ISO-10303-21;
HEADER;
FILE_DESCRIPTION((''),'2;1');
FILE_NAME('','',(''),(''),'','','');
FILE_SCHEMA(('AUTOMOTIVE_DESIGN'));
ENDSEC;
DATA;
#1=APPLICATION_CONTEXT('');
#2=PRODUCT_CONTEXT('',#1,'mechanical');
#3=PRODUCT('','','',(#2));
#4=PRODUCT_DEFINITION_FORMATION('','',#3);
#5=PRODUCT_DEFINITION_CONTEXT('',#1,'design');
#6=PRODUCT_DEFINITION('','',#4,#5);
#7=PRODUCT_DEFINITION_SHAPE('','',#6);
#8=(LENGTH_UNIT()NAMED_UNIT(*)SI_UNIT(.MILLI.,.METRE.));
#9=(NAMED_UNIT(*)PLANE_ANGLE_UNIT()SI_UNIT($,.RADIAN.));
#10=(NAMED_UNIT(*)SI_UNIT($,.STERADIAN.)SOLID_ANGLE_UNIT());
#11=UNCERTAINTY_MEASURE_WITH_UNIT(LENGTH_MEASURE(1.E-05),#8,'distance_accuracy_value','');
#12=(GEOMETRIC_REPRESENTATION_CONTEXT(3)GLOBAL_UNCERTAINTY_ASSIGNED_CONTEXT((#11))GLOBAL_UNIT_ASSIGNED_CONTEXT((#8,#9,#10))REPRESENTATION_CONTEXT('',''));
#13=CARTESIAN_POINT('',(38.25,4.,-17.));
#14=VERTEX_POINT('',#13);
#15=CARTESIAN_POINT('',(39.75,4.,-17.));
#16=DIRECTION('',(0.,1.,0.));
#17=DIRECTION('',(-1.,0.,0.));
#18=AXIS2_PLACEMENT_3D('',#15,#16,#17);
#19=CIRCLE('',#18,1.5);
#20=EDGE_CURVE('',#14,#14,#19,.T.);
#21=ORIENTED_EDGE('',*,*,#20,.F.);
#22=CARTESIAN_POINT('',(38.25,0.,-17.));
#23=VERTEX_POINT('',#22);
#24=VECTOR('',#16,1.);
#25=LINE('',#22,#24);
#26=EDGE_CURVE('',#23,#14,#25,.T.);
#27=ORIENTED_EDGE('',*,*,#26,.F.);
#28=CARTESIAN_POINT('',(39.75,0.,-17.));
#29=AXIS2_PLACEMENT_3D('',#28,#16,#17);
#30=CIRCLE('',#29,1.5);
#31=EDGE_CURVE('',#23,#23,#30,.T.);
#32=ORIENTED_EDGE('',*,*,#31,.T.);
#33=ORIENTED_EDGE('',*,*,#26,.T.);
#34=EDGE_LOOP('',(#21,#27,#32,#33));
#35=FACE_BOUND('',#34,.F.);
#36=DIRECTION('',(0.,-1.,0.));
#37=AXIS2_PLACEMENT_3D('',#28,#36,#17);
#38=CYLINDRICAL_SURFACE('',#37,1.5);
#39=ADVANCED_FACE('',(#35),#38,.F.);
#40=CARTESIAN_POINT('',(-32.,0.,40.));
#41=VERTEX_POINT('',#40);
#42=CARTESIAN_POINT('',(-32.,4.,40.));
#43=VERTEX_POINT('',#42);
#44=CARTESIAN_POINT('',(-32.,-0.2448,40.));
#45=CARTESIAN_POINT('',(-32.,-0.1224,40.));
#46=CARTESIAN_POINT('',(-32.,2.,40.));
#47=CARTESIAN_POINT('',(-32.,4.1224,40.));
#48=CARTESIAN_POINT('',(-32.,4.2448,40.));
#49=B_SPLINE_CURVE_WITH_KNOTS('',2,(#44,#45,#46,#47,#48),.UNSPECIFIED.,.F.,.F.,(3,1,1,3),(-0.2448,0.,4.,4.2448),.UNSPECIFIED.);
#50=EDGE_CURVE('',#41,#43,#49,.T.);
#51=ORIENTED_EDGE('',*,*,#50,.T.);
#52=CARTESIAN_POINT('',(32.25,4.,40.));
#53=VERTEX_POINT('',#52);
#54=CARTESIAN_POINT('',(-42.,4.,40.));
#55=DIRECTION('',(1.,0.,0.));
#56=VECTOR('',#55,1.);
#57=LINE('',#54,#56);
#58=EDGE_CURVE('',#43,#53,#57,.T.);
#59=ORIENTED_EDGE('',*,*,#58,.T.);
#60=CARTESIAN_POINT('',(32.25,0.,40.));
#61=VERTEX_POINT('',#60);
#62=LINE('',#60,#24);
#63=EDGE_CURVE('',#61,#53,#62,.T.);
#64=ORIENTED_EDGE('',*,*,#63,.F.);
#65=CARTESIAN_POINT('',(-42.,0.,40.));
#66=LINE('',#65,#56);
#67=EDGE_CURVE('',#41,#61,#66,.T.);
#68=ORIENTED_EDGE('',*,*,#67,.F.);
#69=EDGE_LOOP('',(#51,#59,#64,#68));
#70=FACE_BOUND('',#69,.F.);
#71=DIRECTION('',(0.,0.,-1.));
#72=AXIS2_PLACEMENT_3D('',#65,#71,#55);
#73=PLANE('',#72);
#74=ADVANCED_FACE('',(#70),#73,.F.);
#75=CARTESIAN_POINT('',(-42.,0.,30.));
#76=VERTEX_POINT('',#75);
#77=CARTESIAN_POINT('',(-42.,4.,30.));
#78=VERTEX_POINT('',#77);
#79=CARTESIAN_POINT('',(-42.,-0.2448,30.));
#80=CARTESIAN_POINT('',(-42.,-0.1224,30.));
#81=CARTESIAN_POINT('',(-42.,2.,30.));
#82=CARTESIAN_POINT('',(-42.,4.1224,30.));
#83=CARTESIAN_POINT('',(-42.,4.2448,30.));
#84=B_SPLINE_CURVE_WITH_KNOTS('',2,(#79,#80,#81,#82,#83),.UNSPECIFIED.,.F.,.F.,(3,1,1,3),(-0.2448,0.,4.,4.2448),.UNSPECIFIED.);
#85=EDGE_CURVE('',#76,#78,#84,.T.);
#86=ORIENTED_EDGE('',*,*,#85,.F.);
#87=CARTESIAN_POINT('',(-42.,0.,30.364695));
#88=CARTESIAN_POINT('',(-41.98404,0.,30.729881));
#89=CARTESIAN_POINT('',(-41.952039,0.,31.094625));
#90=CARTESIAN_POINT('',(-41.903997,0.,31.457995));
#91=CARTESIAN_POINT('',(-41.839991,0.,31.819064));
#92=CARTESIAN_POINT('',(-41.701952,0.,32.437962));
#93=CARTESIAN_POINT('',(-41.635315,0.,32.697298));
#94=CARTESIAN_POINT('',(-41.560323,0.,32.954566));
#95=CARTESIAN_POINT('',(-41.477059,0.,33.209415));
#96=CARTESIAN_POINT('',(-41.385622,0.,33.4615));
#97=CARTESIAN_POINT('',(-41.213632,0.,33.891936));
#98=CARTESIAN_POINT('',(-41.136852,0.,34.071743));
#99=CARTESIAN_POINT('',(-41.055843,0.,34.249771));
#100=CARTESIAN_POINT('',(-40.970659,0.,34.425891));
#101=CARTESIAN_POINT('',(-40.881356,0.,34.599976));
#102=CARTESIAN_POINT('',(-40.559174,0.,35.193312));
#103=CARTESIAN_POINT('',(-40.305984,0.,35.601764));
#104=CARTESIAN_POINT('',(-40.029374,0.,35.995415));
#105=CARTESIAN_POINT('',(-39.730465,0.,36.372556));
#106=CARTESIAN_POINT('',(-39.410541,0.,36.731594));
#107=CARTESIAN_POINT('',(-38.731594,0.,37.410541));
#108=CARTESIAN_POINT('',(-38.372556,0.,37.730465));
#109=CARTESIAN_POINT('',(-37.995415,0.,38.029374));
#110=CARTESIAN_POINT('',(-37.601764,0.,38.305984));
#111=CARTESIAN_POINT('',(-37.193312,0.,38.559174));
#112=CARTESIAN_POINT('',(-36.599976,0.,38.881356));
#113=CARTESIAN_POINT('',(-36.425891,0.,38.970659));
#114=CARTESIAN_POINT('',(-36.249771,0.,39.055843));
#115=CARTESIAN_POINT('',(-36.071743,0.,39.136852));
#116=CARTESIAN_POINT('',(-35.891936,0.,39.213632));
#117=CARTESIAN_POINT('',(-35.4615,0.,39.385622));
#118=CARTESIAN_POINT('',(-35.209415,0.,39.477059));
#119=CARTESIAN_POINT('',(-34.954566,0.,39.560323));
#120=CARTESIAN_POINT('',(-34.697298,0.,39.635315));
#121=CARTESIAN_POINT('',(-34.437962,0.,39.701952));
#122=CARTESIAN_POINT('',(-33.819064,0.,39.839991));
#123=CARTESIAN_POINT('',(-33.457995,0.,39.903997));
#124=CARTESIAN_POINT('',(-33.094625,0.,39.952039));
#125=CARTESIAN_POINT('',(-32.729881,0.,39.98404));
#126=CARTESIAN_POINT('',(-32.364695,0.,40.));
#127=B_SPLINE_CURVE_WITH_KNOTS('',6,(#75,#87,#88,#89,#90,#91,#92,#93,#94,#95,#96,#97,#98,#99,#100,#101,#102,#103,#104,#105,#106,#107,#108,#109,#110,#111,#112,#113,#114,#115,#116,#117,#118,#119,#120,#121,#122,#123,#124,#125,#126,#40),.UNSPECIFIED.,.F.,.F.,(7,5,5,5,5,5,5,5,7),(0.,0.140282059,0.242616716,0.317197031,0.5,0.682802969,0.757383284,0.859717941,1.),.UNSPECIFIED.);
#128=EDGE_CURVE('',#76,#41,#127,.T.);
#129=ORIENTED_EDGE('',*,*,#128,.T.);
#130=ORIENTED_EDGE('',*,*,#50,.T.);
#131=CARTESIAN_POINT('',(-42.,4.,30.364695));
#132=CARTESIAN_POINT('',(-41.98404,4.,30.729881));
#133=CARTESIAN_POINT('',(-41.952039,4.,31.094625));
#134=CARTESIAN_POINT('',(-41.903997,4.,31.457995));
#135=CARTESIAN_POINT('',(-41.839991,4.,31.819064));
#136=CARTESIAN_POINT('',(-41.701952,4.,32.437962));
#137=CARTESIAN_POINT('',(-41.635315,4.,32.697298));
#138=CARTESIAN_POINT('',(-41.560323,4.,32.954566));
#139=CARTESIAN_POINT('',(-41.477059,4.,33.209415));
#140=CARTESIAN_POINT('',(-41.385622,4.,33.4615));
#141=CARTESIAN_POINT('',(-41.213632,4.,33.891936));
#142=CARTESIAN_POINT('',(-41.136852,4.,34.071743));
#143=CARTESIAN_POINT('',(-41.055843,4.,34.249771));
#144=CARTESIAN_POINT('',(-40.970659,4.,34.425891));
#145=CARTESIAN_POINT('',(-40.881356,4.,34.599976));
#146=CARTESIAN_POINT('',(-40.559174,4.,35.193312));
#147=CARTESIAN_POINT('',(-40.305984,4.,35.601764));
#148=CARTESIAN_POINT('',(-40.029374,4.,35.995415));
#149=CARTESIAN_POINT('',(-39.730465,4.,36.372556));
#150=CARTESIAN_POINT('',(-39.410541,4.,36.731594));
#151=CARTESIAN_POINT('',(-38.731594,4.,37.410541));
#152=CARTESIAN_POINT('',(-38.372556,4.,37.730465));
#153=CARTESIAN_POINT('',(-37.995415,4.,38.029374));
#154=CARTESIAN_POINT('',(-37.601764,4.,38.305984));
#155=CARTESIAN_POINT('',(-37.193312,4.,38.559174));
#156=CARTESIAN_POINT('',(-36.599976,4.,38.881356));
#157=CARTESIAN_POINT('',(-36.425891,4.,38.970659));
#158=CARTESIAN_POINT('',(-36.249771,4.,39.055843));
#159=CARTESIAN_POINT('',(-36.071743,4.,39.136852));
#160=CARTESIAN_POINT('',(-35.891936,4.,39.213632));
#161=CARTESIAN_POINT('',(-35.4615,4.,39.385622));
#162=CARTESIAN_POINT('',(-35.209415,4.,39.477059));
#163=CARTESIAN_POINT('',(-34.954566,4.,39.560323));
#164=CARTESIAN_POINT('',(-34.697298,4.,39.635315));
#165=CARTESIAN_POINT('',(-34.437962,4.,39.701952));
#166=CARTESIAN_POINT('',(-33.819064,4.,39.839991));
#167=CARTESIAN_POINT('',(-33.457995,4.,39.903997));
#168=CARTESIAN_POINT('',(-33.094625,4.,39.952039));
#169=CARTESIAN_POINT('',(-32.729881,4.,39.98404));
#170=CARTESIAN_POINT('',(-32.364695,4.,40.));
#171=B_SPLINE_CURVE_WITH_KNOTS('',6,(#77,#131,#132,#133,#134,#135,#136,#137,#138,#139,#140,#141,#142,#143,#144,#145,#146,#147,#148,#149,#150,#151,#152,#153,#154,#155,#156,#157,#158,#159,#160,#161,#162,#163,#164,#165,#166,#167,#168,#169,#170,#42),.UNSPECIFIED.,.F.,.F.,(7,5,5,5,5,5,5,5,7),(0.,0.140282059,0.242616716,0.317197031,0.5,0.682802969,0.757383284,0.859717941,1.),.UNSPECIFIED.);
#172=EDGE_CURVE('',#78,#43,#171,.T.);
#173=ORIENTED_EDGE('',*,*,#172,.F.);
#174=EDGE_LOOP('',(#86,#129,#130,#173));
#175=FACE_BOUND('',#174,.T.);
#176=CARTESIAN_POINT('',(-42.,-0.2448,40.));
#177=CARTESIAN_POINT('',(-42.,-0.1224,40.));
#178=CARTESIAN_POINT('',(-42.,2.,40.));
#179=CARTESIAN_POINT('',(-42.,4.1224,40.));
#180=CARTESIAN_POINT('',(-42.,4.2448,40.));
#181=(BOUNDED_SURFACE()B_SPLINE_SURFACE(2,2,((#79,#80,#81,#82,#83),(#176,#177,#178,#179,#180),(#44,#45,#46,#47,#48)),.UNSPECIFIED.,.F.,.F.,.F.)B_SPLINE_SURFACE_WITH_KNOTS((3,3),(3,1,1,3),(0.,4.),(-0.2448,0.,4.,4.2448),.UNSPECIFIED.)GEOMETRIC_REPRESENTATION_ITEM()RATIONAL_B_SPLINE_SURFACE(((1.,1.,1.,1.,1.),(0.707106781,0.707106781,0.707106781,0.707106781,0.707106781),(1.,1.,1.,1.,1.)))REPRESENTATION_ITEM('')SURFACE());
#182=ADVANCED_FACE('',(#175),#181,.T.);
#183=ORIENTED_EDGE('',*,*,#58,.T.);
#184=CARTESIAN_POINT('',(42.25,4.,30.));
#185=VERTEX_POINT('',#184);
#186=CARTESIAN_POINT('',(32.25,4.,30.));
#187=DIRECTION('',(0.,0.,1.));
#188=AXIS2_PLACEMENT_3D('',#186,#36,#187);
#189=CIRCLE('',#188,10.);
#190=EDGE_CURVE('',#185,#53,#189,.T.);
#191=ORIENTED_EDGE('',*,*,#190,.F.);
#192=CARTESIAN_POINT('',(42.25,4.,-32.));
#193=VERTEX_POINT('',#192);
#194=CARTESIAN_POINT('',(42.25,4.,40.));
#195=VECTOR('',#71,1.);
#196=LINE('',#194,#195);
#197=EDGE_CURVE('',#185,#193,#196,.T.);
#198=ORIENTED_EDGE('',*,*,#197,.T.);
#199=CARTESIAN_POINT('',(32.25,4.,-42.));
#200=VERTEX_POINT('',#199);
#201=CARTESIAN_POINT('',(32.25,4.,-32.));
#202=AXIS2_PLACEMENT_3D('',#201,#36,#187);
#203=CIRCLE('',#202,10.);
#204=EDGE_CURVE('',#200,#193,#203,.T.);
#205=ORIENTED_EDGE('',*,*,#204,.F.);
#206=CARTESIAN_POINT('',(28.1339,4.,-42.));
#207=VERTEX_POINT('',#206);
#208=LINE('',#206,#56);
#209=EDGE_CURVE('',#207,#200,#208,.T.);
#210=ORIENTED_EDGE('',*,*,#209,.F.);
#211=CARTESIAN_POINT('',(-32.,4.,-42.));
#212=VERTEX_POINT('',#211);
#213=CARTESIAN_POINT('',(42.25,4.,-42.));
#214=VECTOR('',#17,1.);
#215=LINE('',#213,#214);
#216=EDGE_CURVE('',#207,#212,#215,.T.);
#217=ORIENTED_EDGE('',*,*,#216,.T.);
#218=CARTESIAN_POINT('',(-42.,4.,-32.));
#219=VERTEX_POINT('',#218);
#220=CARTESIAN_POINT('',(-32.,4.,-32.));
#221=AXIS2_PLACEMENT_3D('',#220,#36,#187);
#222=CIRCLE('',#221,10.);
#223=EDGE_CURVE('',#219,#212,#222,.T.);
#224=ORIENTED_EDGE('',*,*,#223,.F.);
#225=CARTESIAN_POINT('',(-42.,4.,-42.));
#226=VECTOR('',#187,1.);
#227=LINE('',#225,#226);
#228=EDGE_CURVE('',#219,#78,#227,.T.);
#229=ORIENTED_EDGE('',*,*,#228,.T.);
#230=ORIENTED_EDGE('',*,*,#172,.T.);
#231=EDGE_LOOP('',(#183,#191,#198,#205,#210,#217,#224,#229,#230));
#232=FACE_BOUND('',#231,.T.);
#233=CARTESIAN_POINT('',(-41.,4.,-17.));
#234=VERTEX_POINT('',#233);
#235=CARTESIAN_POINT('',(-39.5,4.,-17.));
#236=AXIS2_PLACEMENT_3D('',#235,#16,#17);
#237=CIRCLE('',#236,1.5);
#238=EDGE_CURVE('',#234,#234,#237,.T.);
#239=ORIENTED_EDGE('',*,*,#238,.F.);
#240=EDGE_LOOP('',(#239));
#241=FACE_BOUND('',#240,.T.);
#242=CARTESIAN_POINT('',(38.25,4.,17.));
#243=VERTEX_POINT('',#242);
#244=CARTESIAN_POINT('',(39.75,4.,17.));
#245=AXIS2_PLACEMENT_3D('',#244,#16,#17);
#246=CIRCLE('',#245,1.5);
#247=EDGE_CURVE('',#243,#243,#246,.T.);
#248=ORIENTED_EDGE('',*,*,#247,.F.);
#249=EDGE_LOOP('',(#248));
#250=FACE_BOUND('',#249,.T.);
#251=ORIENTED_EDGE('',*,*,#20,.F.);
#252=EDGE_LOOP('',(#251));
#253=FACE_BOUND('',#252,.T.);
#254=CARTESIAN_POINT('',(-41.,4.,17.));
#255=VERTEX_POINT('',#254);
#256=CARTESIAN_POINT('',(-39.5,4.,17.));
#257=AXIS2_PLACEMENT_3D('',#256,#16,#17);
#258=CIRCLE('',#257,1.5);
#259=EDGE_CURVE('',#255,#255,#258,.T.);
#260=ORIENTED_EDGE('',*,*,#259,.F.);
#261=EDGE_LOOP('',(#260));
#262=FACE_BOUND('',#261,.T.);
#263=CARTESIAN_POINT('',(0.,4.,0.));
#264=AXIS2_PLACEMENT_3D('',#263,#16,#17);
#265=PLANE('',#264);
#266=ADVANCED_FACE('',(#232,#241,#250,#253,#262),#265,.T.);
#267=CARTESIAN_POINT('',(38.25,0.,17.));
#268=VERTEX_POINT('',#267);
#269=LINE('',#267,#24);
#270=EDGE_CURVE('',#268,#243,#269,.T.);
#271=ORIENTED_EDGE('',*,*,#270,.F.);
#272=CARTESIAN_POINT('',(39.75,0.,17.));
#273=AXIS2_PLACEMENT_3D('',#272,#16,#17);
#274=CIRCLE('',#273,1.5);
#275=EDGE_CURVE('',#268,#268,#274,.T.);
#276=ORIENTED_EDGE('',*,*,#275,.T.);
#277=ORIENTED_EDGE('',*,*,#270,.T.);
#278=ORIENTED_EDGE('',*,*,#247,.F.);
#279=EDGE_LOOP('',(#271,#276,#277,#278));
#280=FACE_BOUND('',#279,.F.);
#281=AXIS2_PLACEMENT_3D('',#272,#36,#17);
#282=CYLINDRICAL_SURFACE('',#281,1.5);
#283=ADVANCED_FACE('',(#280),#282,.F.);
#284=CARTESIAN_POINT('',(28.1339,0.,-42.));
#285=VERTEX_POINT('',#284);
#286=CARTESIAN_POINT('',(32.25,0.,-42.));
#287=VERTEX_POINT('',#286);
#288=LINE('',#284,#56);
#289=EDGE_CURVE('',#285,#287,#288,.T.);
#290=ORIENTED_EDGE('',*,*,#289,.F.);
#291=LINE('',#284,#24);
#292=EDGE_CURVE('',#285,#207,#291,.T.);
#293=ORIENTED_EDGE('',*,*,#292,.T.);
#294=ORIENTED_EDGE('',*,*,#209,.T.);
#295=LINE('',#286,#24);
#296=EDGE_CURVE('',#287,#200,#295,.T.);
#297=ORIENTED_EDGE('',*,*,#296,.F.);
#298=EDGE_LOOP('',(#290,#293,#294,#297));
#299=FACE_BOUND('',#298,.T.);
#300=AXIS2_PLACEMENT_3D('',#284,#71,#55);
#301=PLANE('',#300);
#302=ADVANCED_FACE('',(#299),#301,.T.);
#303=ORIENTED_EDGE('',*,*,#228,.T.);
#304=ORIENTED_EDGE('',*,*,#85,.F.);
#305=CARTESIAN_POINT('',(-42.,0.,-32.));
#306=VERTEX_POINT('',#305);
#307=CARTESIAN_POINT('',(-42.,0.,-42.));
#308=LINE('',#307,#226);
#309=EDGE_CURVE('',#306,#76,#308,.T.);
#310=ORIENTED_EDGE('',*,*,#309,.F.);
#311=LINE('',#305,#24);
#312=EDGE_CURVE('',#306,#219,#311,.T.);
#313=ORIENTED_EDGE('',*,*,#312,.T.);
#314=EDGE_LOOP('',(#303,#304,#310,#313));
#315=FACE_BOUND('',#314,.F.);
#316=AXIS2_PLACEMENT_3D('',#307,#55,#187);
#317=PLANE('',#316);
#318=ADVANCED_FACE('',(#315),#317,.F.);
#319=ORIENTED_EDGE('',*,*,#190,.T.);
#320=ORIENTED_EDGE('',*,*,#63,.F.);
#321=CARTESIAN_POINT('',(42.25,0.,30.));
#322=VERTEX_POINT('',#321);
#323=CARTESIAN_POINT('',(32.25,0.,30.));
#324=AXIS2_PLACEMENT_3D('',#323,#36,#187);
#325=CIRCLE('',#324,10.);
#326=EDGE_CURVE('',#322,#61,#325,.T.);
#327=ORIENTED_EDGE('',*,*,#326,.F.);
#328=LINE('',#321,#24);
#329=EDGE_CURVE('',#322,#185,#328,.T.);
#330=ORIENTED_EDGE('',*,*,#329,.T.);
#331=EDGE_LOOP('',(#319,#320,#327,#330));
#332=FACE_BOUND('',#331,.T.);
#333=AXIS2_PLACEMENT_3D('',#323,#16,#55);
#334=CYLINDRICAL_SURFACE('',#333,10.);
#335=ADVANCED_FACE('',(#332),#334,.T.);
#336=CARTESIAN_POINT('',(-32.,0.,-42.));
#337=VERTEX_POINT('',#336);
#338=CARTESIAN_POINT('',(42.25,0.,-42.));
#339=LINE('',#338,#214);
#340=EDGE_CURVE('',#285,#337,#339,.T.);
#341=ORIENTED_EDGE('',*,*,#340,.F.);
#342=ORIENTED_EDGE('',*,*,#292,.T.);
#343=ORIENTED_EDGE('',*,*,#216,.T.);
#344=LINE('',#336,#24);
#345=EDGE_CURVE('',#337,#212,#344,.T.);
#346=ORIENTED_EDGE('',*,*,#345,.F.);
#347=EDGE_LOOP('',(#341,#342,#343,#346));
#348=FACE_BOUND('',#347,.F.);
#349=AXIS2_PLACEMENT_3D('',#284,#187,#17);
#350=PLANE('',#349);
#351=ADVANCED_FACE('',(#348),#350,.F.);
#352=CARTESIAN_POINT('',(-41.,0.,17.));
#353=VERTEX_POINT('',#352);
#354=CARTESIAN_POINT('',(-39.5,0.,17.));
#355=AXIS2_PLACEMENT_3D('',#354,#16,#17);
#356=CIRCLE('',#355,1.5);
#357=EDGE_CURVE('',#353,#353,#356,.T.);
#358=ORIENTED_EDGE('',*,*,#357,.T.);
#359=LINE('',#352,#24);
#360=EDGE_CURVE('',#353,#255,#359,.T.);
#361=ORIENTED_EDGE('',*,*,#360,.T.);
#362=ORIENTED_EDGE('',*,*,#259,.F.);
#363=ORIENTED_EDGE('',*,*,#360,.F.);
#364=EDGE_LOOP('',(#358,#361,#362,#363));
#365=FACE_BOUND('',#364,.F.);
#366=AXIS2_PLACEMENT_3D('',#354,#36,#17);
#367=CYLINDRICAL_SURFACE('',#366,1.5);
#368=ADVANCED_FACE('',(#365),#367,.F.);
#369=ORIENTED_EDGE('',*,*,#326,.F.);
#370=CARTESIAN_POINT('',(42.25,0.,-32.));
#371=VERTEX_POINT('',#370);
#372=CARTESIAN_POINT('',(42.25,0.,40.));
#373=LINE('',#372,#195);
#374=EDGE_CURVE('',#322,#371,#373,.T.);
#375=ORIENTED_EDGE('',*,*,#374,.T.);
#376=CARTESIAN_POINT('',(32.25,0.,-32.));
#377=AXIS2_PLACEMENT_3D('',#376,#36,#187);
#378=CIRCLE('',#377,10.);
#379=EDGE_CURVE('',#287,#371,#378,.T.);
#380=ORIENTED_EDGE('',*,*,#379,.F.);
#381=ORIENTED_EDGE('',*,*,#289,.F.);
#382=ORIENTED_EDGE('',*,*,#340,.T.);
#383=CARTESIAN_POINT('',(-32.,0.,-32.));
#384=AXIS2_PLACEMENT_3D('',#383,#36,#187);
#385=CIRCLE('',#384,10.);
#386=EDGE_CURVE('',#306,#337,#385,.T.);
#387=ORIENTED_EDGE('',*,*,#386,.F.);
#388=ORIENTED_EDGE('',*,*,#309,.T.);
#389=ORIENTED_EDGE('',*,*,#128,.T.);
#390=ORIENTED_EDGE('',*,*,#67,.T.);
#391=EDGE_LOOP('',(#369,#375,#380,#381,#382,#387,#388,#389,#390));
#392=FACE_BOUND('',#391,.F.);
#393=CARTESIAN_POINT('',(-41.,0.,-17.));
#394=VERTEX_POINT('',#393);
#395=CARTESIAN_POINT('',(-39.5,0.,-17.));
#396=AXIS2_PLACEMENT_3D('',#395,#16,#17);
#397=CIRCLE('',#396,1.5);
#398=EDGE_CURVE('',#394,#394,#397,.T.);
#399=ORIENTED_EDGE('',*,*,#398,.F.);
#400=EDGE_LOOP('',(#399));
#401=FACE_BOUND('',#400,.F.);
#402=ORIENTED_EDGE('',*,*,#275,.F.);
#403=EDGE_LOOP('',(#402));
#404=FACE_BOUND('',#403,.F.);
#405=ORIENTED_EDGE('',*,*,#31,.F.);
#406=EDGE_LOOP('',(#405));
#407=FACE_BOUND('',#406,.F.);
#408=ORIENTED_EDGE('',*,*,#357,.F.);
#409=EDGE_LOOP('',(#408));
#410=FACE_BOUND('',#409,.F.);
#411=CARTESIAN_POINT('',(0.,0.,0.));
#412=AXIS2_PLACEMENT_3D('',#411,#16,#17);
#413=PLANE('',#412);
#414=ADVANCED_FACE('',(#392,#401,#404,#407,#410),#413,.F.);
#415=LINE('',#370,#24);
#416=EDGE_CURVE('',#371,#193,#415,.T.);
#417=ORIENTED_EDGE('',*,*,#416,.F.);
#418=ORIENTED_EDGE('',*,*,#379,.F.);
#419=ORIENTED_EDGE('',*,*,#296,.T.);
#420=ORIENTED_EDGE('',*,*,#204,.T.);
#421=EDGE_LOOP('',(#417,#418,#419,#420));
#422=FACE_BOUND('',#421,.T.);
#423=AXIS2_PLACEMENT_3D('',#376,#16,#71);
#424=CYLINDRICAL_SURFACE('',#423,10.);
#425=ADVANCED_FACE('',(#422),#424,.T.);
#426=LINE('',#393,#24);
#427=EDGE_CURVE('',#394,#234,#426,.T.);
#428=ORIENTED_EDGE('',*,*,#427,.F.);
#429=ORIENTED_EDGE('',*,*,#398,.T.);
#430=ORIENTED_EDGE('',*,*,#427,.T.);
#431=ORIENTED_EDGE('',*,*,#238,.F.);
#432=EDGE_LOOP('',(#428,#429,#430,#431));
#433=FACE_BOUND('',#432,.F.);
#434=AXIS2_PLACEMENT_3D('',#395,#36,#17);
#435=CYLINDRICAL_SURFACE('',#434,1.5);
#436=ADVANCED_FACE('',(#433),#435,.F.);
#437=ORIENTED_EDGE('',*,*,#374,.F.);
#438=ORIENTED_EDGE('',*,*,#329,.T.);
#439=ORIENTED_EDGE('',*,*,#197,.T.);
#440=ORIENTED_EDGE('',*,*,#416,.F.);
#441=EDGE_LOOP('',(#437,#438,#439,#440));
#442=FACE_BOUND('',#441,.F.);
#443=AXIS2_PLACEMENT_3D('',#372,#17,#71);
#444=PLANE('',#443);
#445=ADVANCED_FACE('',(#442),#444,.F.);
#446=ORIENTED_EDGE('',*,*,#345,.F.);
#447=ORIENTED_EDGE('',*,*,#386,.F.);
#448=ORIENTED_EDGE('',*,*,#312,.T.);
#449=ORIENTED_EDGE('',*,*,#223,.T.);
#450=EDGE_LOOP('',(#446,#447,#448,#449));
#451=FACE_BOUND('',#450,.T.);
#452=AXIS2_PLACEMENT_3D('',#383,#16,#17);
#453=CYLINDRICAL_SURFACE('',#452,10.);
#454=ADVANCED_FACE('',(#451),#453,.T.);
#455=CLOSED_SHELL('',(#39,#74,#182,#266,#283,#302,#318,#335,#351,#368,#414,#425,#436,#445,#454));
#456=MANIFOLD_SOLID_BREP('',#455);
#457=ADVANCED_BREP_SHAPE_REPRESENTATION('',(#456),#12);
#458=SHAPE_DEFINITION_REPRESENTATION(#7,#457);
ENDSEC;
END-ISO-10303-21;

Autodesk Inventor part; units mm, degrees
ref_plane "YZ Plane" through (0, 0, 0) normal (1, 0, 0) x (0, 1, 0)
ref_plane "XZ Plane" through (0, 0, 0) normal (0, 1, 0) x (-1, 0, 0)
ref_plane "XY Plane" through (0, 0, 0) normal (0, 0, 1) x (1, 0, 0)
sketch "Эскиз1" plane through (0, 0, 0) normal (0, 1, 0) x (-1, 0, 0)
  line L0 (42, 40) -> (42, 38)
  line L1 (-28.1339, -42) -> (-42.25, -42)
  line L2 (42, 40) -> (-42.25, 40)
  line L3 (-42.25, 40) -> (-42.25, -42)
  line L4 (-42.25, -42) -> (42, -42)
  line L5 (42, -42) -> (42, 40)
  circle A0 centre (39.5, -17) radius 1.5
  circle A1 centre (-39.75, -17) radius 1.5
  circle A2 centre (-39.75, 17) radius 1.5
  circle A3 centre (39.5, 17) radius 1.5
  point P0 (0, 0)
  point P1 (0, 0)
extrude "Выдавливание1" add sketch "Эскиз1" along normal blind 4
fillet "Сопряжение1" radius 10 4 edges at (42.25, 2, 40) (42.25, 2, -42) (-42, 2, -42) (-42, 2, 40)
properties part number "KB33-046-004-021 - Зажим точки доступа"
